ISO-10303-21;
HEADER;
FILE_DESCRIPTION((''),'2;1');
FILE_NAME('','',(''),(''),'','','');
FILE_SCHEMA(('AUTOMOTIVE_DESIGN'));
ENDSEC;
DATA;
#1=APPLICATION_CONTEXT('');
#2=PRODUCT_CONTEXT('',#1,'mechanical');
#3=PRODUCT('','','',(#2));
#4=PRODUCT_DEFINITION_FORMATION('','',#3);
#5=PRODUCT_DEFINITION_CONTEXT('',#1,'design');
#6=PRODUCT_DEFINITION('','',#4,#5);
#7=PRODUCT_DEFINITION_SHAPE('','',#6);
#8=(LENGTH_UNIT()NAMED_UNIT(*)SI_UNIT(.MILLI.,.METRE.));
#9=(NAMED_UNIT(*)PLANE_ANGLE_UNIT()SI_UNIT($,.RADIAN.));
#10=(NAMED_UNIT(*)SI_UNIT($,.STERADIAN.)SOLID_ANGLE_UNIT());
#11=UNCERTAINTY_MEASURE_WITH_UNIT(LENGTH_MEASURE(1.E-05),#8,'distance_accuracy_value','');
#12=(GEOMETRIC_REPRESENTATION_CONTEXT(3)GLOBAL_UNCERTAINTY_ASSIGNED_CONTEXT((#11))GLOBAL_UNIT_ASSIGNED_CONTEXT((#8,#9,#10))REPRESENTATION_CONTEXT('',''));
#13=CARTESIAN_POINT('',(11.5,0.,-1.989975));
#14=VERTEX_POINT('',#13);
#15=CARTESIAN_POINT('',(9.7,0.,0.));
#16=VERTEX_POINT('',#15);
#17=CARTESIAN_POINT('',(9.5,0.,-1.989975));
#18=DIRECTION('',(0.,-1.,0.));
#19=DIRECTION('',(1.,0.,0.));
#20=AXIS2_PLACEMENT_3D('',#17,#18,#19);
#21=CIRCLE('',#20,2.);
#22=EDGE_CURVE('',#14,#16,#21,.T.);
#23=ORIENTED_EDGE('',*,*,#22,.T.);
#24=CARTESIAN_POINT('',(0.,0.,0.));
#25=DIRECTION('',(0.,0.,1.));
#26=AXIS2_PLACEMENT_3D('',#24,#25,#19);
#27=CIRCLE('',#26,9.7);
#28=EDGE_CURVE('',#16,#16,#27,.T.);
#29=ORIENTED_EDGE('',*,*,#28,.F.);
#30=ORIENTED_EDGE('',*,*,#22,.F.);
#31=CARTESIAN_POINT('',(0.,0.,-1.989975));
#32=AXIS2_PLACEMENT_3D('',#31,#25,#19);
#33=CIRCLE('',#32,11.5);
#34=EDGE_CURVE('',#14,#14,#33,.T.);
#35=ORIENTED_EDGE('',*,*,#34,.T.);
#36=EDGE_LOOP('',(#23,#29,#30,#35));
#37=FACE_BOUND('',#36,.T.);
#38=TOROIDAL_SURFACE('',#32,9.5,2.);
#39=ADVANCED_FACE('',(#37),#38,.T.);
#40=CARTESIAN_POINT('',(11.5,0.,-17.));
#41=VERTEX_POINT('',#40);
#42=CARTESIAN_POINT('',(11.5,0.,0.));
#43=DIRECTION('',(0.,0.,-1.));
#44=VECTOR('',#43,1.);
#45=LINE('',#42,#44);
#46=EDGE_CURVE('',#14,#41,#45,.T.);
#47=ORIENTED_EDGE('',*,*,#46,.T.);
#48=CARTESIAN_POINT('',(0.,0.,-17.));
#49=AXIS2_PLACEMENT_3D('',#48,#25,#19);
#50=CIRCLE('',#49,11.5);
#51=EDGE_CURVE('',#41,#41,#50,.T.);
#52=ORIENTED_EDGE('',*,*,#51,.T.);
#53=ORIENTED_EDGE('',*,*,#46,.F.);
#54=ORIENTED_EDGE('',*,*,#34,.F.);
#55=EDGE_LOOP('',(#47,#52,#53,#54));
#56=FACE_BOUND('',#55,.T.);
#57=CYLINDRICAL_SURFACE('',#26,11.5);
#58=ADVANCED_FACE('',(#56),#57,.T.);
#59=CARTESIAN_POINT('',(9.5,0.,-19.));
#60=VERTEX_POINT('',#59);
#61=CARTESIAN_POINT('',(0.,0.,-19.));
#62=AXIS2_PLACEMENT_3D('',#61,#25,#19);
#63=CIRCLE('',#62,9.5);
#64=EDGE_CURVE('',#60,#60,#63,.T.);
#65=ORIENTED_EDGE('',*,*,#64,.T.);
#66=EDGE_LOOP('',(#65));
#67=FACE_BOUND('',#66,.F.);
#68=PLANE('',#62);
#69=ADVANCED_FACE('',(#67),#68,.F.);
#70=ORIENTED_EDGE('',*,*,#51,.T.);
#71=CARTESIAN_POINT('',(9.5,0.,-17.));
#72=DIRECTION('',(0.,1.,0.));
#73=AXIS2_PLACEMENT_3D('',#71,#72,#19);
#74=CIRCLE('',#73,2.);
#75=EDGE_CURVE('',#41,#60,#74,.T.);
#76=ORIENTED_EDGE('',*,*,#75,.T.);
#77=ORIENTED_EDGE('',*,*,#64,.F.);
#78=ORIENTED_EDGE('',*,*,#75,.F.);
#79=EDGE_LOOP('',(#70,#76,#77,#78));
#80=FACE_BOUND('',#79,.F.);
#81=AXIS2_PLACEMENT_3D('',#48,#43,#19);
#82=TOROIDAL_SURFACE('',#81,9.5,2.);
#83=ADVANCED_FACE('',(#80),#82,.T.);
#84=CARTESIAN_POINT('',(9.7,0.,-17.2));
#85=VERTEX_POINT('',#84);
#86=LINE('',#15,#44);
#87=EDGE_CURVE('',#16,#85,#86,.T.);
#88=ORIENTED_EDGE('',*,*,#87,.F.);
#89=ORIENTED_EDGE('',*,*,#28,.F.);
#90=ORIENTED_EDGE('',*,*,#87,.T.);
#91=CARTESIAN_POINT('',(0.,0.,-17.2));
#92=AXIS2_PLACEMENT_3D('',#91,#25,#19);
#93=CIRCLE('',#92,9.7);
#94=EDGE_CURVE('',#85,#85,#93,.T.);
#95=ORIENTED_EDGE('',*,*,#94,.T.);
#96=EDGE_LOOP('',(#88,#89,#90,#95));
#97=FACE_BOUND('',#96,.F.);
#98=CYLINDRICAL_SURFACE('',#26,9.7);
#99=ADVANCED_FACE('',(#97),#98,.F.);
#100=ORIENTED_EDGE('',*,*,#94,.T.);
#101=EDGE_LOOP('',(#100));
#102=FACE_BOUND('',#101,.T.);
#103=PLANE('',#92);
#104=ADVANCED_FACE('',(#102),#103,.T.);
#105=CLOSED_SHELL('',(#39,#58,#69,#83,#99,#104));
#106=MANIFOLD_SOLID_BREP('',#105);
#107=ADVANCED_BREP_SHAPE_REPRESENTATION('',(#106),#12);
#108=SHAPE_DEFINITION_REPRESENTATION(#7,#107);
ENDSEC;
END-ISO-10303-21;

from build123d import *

# Parameters (mm, degrees)
F0_R     = 11.5
F1_DEPTH = 19
F2_T     = -1.8


# Not quite as in the source:
# - a fillet or chamfer that OpenCascade refuses, or shapes differently, is made with other operations: its cross-section is extruded or revolved along the edge and cut away or added


with BuildPart() as f1:
    # F0 (on Top) → F1 (new body)
    with BuildSketch(Plane.XY):
        Circle(F0_R)
    extrude(amount=-F1_DEPTH)

    # F2
    f2_openings = [f1.faces().sort_by_distance(p)[0] for p in [
        (0, 0, 0),
    ]]
    offset(amount=F2_T, openings=f2_openings)

    # F3: fillet of radius 2 on 2 edges, made by hand

    # F3_s1 → F3_t2 (revolve, cut)
    with BuildSketch(Plane.XZ):
        with BuildLine():
            ThreePointArc((11.5, -17), (10.9142135624, -18.4142135624), (9.5, -19))
            Line((9.5, -19), (11.5, -19))
            Line((11.5, -19), (11.5, -17))
        make_face()
    revolve(axis=Axis((0, 0, -19), (0, 0, 1)), mode=Mode.SUBTRACT)

    # F3_s3 → F3_t4 (revolve, cut)
    with BuildSketch(Plane.XZ):
        with BuildLine():
            ThreePointArc((11.5, -1.9899748742), (10.9832396974, -0.6483340877), (9.7, 0))
            Line((9.7, 0), (11.5, 0))
            Line((11.5, 0), (11.5, -1.9899748742))
        make_face()
    revolve(axis=Axis((0, 0, 0), (0, 0, 1)), mode=Mode.SUBTRACT)


solid = f1.part
